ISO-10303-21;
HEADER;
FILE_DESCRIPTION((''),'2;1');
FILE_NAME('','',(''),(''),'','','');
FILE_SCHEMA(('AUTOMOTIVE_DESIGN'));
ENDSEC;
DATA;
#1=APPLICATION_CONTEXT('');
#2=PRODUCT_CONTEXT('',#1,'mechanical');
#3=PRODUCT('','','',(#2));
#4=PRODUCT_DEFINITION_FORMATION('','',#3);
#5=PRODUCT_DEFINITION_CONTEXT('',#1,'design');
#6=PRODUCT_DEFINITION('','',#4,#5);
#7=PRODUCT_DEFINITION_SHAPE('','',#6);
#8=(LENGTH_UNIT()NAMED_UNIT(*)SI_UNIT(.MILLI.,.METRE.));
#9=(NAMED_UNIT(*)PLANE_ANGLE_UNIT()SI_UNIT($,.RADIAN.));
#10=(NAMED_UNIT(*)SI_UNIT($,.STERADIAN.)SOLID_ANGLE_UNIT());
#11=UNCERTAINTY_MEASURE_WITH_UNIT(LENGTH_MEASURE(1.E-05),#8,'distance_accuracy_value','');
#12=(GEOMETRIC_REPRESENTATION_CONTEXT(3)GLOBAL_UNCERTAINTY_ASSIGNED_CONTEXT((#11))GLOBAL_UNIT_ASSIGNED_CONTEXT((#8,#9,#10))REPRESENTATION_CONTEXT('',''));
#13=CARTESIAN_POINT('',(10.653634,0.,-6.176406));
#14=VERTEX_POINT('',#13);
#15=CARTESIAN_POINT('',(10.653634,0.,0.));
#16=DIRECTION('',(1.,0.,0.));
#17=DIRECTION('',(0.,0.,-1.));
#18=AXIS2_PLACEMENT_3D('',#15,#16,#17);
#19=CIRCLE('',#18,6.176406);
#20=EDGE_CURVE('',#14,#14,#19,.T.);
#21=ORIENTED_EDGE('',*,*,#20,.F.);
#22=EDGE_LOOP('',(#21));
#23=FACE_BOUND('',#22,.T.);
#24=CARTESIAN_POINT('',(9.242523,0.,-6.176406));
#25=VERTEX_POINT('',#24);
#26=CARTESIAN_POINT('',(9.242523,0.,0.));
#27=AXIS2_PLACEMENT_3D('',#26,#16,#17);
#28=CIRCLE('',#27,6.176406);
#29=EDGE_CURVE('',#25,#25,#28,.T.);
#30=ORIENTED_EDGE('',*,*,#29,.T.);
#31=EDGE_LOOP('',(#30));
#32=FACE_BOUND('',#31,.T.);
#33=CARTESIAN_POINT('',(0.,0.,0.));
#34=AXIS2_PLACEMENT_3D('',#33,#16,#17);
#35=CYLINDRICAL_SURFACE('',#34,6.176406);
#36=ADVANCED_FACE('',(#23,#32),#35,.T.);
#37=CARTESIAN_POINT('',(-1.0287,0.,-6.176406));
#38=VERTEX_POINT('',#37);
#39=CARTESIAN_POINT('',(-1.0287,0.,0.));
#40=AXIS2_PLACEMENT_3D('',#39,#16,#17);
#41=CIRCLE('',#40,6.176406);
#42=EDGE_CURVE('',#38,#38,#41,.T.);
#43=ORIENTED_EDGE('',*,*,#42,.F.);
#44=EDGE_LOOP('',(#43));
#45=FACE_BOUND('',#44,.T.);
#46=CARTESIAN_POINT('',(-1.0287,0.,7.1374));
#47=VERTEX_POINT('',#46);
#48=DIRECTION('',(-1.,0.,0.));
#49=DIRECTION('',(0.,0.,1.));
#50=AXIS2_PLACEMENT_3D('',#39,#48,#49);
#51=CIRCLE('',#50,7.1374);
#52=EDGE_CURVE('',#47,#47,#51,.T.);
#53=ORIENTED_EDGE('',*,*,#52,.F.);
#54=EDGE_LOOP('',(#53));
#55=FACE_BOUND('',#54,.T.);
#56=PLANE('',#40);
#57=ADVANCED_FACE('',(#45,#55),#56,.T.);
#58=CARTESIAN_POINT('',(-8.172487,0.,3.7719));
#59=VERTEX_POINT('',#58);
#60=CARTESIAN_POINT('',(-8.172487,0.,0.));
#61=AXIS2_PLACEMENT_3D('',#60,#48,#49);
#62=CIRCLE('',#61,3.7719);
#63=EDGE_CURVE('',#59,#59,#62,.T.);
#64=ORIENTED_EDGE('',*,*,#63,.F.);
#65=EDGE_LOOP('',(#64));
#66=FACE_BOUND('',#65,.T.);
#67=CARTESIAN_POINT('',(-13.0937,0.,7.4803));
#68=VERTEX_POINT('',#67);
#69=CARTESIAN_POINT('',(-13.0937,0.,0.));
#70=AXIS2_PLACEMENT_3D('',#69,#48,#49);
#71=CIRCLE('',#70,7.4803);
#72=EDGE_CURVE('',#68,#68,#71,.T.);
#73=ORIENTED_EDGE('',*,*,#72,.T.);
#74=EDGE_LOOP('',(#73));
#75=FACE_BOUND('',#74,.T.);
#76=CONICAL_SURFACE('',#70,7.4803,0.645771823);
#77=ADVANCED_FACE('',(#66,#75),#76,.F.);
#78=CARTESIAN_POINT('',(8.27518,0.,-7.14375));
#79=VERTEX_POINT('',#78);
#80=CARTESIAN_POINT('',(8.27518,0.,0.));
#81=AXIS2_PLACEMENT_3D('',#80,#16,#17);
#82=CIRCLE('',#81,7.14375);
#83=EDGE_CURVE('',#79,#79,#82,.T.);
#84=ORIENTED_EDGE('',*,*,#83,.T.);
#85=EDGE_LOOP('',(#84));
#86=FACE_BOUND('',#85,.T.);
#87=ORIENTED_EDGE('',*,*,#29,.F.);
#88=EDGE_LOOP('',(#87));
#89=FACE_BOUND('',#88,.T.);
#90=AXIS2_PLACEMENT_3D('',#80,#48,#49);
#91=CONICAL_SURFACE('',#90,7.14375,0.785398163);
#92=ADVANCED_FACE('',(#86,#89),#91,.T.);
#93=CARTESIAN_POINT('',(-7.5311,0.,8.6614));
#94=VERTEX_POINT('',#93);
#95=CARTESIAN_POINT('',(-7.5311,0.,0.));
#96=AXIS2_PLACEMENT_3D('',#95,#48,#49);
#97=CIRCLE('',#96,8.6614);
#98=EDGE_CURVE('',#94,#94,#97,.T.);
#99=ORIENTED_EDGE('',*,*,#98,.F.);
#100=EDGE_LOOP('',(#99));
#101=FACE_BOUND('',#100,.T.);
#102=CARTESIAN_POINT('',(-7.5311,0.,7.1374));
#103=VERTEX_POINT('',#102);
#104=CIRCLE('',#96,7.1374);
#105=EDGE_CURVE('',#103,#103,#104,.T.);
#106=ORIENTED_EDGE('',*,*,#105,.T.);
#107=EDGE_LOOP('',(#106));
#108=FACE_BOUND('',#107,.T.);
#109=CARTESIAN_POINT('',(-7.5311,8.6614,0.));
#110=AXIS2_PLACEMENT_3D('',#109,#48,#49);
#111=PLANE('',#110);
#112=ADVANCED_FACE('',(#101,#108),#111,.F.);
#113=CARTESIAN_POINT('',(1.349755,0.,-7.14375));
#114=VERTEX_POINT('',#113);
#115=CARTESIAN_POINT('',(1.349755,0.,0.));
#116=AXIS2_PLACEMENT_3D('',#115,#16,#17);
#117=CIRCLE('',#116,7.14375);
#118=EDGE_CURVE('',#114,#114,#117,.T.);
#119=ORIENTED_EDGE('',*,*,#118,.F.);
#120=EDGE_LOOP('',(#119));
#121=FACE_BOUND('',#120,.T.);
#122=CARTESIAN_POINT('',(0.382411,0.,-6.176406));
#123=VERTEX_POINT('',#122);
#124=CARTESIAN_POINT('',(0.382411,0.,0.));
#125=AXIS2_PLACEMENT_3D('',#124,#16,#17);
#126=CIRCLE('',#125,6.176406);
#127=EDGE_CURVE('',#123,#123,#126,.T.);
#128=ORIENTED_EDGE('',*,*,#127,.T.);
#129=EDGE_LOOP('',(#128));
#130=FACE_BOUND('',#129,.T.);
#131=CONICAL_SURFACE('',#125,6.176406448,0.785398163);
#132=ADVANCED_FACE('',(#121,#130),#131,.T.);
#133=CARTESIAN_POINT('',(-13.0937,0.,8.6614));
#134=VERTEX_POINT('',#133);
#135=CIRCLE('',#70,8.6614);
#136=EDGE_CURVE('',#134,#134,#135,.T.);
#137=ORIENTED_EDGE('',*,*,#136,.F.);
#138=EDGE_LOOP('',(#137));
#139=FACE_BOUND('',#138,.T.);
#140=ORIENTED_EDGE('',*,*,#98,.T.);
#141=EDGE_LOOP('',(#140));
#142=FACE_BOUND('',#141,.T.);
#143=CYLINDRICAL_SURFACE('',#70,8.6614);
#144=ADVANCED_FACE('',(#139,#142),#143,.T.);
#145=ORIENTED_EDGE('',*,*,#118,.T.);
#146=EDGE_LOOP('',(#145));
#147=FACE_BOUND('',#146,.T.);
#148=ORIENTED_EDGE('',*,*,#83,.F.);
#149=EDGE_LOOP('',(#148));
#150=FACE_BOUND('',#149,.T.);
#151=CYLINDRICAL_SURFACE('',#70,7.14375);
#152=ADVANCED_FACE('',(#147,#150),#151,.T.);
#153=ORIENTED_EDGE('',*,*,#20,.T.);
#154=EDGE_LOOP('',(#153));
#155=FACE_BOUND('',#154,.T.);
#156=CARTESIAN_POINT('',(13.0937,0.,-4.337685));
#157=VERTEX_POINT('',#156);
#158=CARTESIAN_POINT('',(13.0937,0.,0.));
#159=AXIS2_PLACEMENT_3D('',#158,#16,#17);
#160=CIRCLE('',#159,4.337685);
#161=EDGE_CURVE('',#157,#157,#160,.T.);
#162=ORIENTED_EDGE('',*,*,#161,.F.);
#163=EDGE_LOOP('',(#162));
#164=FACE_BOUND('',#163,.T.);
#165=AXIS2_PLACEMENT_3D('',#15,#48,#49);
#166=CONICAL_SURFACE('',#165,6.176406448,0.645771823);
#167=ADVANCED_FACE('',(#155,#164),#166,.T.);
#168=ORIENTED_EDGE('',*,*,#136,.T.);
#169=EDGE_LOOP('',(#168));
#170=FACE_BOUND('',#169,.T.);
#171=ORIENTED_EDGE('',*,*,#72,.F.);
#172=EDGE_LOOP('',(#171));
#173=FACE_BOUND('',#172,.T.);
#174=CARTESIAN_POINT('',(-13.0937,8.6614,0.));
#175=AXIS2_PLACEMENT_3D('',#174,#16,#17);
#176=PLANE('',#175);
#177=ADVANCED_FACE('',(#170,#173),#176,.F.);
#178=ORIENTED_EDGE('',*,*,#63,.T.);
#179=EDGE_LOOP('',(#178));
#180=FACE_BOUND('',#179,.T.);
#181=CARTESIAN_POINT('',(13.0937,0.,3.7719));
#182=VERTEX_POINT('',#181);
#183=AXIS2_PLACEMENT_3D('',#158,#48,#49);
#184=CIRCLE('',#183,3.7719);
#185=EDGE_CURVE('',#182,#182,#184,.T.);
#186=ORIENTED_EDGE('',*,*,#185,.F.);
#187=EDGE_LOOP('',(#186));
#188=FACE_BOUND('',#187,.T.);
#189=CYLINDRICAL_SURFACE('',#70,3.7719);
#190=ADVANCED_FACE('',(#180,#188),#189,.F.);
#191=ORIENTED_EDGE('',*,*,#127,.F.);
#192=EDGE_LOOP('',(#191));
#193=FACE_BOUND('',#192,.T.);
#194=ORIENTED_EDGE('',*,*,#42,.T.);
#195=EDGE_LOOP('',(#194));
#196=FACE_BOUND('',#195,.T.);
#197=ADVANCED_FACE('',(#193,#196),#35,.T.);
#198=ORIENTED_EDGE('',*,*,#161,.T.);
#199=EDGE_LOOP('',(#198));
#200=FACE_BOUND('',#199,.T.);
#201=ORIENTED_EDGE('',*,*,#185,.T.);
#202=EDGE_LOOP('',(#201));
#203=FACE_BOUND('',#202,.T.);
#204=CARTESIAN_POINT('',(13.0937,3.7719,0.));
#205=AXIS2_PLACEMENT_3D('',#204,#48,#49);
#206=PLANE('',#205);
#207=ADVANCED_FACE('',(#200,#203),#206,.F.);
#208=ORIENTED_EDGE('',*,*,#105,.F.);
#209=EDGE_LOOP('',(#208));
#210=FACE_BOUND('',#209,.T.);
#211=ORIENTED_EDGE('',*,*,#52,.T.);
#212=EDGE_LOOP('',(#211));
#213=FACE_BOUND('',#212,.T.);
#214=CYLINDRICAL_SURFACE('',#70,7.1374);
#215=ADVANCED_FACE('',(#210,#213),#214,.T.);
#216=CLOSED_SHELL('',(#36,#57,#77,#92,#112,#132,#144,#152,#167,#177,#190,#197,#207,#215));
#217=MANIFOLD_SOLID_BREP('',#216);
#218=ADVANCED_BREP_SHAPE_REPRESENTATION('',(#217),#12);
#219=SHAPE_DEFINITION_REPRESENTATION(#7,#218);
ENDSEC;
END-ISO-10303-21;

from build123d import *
from build123d.topology import SkipClean

# Parameters (mm, degrees)
CUT_SWEEP1_PITCH = 1.411111111


with BuildPart() as part:
    # Sketch1 → Revolve1 (revolve)
    with BuildSketch(Plane.XY, mode=Mode.PRIVATE) as revolve1_sk:
        Polygon((-13.0937, 8.6614), (-13.0937, 7.4803), (-8.172486984, 3.7719), (13.0937, 3.7719), (13.0937, 4.337685), (13.0937, 7.14375), (9.369925973, 7.14375), (-1.0287, 7.14375), (-1.0287, 7.1374), (-7.5311, 7.1374), (-7.5311, 8.6614), align=None)
    revolve(revolve1_sk.sketch.rotate(Axis((-13.0937, 0, 0), (1, 0, 0)), 90), axis=Axis((-13.0937, 0, 0), (1, 0, 0)))

    # Cut-Sweep1: the profile of Sketch4 profile screwed along a right-hand helix of 10.008 turns, 8 arcs to a turn; built about Z, then put on its axis
    cut_sweep1_z = Axis((0, 0, 0), (0, 0, 1))
    cut_sweep1_corners = [(7.14435, 0, 0.00034641), (7.14435, 0, -1.235068632), (6.227206448, 0, -0.705555556), (6.227206448, 0, -0.529166667)]
    with BuildLine(mode=Mode.PRIVATE) as cut_sweep1_profile:
        Line(cut_sweep1_corners[0], cut_sweep1_corners[1])
        Line(cut_sweep1_corners[1], cut_sweep1_corners[2])
        Line(cut_sweep1_corners[2], cut_sweep1_corners[3])
        Line(cut_sweep1_corners[3], cut_sweep1_corners[0])
    cut_sweep1_cap = Face(cut_sweep1_profile.wire())
    cut_sweep1_turn_angles = [0, 22.5, 45, 67.5, 90, 112.5, 135, 157.5, 180, 202.5, 225, 247.5, 270, 292.5, 315, 337.5, 360]
    cut_sweep1_turn_weights = [1, 0.9238795325112867, 1, 0.9238795325112867, 1, 0.9238795325112867, 1, 0.9238795325112867, 1, 0.9238795325112867, 1, 0.9238795325112867, 1, 0.9238795325112867, 1, 0.9238795325112867, 1]
    cut_sweep1_turn_rails = [Edge.make_bspline([Vector(p[0], p[1], 0).rotate(cut_sweep1_z, cut_sweep1_turn_angles[k]) / cut_sweep1_turn_weights[k] + Vector(0, 0, p[2] + CUT_SWEEP1_PITCH * cut_sweep1_turn_angles[k] / 360) for k in range(17)], [0, 0, 0, 1, 1, 2, 2, 3, 3, 4, 4, 5, 5, 6, 6, 7, 7, 8, 8, 8], 2, cut_sweep1_turn_weights) for p in cut_sweep1_corners]
    cut_sweep1_turn_sides = [Face.make_surface_from_curves(cut_sweep1_turn_rails[p[0]], cut_sweep1_turn_rails[p[1]]) for p in [(0, 1), (1, 2), (2, 3), (3, 0)]]
    cut_sweep1_last_angles = [3600, 3601.44, 3602.88]
    cut_sweep1_last_weights = [1, 0.9996841892832969, 1]
    cut_sweep1_last_rails = [Edge.make_bspline([Vector(p[0], p[1], 0).rotate(cut_sweep1_z, cut_sweep1_last_angles[k]) / cut_sweep1_last_weights[k] + Vector(0, 0, p[2] + CUT_SWEEP1_PITCH * cut_sweep1_last_angles[k] / 360) for k in range(3)], [0, 0, 0, 1, 1, 1], 2, cut_sweep1_last_weights) for p in cut_sweep1_corners]
    cut_sweep1_last_sides = [Face.make_surface_from_curves(cut_sweep1_last_rails[p[0]], cut_sweep1_last_rails[p[1]]) for p in [(0, 1), (1, 2), (2, 3), (3, 0)]]
    cut_sweep1 = Plane(origin=(13.0937, 0, 0), x_dir=(0, 1, 0), z_dir=(-1, 0, 0)) * Solid(Shell([*[p.moved(Location((0, 0, CUT_SWEEP1_PITCH * i))) for i in range(10) for p in cut_sweep1_turn_sides], *cut_sweep1_last_sides, cut_sweep1_cap, cut_sweep1_cap.rotate(cut_sweep1_z, 3602.88).moved(Location((0, 0, CUT_SWEEP1_PITCH * 3602.88 / 360)))]))
    add(cut_sweep1, mode=Mode.SUBTRACT)

    # Sketch5 → Cut-Revolve1 (revolve, cut)
    with BuildSketch(Plane.XY, mode=Mode.PRIVATE) as cut_revolve1_sk:
        Polygon((13.0937, 4.337685), (10.653634224, 6.176406448), (9.242523113, 6.176406448), (8.275179561, 7.14375), (13.0937, 7.14375), align=None)
        Polygon((-1.0287, 7.14375), (-1.0287, 6.176406448), (0.382411111, 6.176406448), (1.349754663, 7.14375), align=None)
    revolve(cut_revolve1_sk.sketch.rotate(Axis((0, 0, 0), (-1, 0, 0)), 90), axis=Axis((0, 0, 0), (-1, 0, 0)), mode=Mode.SUBTRACT)

    # Sketch6 → Revolve2 (revolve)
    with SkipClean():  # the faces are left unmerged after this step: merging them gives an invalid solid
        with BuildSketch(Plane.XY, mode=Mode.PRIVATE) as revolve2_sk:
            Polygon((1.349754663, 7.14375), (0.382411111, 6.176406448), (9.242523113, 6.176406448), (8.275179561, 7.14375), align=None)
        revolve(revolve2_sk.sketch.rotate(Axis((0, 0, 0), (-1, 0, 0)), 90), axis=Axis((0, 0, 0), (-1, 0, 0)))
    add(part.part.scale(1), mode=Mode.REPLACE)  # the faces are merged on a copy


solid = part.part
